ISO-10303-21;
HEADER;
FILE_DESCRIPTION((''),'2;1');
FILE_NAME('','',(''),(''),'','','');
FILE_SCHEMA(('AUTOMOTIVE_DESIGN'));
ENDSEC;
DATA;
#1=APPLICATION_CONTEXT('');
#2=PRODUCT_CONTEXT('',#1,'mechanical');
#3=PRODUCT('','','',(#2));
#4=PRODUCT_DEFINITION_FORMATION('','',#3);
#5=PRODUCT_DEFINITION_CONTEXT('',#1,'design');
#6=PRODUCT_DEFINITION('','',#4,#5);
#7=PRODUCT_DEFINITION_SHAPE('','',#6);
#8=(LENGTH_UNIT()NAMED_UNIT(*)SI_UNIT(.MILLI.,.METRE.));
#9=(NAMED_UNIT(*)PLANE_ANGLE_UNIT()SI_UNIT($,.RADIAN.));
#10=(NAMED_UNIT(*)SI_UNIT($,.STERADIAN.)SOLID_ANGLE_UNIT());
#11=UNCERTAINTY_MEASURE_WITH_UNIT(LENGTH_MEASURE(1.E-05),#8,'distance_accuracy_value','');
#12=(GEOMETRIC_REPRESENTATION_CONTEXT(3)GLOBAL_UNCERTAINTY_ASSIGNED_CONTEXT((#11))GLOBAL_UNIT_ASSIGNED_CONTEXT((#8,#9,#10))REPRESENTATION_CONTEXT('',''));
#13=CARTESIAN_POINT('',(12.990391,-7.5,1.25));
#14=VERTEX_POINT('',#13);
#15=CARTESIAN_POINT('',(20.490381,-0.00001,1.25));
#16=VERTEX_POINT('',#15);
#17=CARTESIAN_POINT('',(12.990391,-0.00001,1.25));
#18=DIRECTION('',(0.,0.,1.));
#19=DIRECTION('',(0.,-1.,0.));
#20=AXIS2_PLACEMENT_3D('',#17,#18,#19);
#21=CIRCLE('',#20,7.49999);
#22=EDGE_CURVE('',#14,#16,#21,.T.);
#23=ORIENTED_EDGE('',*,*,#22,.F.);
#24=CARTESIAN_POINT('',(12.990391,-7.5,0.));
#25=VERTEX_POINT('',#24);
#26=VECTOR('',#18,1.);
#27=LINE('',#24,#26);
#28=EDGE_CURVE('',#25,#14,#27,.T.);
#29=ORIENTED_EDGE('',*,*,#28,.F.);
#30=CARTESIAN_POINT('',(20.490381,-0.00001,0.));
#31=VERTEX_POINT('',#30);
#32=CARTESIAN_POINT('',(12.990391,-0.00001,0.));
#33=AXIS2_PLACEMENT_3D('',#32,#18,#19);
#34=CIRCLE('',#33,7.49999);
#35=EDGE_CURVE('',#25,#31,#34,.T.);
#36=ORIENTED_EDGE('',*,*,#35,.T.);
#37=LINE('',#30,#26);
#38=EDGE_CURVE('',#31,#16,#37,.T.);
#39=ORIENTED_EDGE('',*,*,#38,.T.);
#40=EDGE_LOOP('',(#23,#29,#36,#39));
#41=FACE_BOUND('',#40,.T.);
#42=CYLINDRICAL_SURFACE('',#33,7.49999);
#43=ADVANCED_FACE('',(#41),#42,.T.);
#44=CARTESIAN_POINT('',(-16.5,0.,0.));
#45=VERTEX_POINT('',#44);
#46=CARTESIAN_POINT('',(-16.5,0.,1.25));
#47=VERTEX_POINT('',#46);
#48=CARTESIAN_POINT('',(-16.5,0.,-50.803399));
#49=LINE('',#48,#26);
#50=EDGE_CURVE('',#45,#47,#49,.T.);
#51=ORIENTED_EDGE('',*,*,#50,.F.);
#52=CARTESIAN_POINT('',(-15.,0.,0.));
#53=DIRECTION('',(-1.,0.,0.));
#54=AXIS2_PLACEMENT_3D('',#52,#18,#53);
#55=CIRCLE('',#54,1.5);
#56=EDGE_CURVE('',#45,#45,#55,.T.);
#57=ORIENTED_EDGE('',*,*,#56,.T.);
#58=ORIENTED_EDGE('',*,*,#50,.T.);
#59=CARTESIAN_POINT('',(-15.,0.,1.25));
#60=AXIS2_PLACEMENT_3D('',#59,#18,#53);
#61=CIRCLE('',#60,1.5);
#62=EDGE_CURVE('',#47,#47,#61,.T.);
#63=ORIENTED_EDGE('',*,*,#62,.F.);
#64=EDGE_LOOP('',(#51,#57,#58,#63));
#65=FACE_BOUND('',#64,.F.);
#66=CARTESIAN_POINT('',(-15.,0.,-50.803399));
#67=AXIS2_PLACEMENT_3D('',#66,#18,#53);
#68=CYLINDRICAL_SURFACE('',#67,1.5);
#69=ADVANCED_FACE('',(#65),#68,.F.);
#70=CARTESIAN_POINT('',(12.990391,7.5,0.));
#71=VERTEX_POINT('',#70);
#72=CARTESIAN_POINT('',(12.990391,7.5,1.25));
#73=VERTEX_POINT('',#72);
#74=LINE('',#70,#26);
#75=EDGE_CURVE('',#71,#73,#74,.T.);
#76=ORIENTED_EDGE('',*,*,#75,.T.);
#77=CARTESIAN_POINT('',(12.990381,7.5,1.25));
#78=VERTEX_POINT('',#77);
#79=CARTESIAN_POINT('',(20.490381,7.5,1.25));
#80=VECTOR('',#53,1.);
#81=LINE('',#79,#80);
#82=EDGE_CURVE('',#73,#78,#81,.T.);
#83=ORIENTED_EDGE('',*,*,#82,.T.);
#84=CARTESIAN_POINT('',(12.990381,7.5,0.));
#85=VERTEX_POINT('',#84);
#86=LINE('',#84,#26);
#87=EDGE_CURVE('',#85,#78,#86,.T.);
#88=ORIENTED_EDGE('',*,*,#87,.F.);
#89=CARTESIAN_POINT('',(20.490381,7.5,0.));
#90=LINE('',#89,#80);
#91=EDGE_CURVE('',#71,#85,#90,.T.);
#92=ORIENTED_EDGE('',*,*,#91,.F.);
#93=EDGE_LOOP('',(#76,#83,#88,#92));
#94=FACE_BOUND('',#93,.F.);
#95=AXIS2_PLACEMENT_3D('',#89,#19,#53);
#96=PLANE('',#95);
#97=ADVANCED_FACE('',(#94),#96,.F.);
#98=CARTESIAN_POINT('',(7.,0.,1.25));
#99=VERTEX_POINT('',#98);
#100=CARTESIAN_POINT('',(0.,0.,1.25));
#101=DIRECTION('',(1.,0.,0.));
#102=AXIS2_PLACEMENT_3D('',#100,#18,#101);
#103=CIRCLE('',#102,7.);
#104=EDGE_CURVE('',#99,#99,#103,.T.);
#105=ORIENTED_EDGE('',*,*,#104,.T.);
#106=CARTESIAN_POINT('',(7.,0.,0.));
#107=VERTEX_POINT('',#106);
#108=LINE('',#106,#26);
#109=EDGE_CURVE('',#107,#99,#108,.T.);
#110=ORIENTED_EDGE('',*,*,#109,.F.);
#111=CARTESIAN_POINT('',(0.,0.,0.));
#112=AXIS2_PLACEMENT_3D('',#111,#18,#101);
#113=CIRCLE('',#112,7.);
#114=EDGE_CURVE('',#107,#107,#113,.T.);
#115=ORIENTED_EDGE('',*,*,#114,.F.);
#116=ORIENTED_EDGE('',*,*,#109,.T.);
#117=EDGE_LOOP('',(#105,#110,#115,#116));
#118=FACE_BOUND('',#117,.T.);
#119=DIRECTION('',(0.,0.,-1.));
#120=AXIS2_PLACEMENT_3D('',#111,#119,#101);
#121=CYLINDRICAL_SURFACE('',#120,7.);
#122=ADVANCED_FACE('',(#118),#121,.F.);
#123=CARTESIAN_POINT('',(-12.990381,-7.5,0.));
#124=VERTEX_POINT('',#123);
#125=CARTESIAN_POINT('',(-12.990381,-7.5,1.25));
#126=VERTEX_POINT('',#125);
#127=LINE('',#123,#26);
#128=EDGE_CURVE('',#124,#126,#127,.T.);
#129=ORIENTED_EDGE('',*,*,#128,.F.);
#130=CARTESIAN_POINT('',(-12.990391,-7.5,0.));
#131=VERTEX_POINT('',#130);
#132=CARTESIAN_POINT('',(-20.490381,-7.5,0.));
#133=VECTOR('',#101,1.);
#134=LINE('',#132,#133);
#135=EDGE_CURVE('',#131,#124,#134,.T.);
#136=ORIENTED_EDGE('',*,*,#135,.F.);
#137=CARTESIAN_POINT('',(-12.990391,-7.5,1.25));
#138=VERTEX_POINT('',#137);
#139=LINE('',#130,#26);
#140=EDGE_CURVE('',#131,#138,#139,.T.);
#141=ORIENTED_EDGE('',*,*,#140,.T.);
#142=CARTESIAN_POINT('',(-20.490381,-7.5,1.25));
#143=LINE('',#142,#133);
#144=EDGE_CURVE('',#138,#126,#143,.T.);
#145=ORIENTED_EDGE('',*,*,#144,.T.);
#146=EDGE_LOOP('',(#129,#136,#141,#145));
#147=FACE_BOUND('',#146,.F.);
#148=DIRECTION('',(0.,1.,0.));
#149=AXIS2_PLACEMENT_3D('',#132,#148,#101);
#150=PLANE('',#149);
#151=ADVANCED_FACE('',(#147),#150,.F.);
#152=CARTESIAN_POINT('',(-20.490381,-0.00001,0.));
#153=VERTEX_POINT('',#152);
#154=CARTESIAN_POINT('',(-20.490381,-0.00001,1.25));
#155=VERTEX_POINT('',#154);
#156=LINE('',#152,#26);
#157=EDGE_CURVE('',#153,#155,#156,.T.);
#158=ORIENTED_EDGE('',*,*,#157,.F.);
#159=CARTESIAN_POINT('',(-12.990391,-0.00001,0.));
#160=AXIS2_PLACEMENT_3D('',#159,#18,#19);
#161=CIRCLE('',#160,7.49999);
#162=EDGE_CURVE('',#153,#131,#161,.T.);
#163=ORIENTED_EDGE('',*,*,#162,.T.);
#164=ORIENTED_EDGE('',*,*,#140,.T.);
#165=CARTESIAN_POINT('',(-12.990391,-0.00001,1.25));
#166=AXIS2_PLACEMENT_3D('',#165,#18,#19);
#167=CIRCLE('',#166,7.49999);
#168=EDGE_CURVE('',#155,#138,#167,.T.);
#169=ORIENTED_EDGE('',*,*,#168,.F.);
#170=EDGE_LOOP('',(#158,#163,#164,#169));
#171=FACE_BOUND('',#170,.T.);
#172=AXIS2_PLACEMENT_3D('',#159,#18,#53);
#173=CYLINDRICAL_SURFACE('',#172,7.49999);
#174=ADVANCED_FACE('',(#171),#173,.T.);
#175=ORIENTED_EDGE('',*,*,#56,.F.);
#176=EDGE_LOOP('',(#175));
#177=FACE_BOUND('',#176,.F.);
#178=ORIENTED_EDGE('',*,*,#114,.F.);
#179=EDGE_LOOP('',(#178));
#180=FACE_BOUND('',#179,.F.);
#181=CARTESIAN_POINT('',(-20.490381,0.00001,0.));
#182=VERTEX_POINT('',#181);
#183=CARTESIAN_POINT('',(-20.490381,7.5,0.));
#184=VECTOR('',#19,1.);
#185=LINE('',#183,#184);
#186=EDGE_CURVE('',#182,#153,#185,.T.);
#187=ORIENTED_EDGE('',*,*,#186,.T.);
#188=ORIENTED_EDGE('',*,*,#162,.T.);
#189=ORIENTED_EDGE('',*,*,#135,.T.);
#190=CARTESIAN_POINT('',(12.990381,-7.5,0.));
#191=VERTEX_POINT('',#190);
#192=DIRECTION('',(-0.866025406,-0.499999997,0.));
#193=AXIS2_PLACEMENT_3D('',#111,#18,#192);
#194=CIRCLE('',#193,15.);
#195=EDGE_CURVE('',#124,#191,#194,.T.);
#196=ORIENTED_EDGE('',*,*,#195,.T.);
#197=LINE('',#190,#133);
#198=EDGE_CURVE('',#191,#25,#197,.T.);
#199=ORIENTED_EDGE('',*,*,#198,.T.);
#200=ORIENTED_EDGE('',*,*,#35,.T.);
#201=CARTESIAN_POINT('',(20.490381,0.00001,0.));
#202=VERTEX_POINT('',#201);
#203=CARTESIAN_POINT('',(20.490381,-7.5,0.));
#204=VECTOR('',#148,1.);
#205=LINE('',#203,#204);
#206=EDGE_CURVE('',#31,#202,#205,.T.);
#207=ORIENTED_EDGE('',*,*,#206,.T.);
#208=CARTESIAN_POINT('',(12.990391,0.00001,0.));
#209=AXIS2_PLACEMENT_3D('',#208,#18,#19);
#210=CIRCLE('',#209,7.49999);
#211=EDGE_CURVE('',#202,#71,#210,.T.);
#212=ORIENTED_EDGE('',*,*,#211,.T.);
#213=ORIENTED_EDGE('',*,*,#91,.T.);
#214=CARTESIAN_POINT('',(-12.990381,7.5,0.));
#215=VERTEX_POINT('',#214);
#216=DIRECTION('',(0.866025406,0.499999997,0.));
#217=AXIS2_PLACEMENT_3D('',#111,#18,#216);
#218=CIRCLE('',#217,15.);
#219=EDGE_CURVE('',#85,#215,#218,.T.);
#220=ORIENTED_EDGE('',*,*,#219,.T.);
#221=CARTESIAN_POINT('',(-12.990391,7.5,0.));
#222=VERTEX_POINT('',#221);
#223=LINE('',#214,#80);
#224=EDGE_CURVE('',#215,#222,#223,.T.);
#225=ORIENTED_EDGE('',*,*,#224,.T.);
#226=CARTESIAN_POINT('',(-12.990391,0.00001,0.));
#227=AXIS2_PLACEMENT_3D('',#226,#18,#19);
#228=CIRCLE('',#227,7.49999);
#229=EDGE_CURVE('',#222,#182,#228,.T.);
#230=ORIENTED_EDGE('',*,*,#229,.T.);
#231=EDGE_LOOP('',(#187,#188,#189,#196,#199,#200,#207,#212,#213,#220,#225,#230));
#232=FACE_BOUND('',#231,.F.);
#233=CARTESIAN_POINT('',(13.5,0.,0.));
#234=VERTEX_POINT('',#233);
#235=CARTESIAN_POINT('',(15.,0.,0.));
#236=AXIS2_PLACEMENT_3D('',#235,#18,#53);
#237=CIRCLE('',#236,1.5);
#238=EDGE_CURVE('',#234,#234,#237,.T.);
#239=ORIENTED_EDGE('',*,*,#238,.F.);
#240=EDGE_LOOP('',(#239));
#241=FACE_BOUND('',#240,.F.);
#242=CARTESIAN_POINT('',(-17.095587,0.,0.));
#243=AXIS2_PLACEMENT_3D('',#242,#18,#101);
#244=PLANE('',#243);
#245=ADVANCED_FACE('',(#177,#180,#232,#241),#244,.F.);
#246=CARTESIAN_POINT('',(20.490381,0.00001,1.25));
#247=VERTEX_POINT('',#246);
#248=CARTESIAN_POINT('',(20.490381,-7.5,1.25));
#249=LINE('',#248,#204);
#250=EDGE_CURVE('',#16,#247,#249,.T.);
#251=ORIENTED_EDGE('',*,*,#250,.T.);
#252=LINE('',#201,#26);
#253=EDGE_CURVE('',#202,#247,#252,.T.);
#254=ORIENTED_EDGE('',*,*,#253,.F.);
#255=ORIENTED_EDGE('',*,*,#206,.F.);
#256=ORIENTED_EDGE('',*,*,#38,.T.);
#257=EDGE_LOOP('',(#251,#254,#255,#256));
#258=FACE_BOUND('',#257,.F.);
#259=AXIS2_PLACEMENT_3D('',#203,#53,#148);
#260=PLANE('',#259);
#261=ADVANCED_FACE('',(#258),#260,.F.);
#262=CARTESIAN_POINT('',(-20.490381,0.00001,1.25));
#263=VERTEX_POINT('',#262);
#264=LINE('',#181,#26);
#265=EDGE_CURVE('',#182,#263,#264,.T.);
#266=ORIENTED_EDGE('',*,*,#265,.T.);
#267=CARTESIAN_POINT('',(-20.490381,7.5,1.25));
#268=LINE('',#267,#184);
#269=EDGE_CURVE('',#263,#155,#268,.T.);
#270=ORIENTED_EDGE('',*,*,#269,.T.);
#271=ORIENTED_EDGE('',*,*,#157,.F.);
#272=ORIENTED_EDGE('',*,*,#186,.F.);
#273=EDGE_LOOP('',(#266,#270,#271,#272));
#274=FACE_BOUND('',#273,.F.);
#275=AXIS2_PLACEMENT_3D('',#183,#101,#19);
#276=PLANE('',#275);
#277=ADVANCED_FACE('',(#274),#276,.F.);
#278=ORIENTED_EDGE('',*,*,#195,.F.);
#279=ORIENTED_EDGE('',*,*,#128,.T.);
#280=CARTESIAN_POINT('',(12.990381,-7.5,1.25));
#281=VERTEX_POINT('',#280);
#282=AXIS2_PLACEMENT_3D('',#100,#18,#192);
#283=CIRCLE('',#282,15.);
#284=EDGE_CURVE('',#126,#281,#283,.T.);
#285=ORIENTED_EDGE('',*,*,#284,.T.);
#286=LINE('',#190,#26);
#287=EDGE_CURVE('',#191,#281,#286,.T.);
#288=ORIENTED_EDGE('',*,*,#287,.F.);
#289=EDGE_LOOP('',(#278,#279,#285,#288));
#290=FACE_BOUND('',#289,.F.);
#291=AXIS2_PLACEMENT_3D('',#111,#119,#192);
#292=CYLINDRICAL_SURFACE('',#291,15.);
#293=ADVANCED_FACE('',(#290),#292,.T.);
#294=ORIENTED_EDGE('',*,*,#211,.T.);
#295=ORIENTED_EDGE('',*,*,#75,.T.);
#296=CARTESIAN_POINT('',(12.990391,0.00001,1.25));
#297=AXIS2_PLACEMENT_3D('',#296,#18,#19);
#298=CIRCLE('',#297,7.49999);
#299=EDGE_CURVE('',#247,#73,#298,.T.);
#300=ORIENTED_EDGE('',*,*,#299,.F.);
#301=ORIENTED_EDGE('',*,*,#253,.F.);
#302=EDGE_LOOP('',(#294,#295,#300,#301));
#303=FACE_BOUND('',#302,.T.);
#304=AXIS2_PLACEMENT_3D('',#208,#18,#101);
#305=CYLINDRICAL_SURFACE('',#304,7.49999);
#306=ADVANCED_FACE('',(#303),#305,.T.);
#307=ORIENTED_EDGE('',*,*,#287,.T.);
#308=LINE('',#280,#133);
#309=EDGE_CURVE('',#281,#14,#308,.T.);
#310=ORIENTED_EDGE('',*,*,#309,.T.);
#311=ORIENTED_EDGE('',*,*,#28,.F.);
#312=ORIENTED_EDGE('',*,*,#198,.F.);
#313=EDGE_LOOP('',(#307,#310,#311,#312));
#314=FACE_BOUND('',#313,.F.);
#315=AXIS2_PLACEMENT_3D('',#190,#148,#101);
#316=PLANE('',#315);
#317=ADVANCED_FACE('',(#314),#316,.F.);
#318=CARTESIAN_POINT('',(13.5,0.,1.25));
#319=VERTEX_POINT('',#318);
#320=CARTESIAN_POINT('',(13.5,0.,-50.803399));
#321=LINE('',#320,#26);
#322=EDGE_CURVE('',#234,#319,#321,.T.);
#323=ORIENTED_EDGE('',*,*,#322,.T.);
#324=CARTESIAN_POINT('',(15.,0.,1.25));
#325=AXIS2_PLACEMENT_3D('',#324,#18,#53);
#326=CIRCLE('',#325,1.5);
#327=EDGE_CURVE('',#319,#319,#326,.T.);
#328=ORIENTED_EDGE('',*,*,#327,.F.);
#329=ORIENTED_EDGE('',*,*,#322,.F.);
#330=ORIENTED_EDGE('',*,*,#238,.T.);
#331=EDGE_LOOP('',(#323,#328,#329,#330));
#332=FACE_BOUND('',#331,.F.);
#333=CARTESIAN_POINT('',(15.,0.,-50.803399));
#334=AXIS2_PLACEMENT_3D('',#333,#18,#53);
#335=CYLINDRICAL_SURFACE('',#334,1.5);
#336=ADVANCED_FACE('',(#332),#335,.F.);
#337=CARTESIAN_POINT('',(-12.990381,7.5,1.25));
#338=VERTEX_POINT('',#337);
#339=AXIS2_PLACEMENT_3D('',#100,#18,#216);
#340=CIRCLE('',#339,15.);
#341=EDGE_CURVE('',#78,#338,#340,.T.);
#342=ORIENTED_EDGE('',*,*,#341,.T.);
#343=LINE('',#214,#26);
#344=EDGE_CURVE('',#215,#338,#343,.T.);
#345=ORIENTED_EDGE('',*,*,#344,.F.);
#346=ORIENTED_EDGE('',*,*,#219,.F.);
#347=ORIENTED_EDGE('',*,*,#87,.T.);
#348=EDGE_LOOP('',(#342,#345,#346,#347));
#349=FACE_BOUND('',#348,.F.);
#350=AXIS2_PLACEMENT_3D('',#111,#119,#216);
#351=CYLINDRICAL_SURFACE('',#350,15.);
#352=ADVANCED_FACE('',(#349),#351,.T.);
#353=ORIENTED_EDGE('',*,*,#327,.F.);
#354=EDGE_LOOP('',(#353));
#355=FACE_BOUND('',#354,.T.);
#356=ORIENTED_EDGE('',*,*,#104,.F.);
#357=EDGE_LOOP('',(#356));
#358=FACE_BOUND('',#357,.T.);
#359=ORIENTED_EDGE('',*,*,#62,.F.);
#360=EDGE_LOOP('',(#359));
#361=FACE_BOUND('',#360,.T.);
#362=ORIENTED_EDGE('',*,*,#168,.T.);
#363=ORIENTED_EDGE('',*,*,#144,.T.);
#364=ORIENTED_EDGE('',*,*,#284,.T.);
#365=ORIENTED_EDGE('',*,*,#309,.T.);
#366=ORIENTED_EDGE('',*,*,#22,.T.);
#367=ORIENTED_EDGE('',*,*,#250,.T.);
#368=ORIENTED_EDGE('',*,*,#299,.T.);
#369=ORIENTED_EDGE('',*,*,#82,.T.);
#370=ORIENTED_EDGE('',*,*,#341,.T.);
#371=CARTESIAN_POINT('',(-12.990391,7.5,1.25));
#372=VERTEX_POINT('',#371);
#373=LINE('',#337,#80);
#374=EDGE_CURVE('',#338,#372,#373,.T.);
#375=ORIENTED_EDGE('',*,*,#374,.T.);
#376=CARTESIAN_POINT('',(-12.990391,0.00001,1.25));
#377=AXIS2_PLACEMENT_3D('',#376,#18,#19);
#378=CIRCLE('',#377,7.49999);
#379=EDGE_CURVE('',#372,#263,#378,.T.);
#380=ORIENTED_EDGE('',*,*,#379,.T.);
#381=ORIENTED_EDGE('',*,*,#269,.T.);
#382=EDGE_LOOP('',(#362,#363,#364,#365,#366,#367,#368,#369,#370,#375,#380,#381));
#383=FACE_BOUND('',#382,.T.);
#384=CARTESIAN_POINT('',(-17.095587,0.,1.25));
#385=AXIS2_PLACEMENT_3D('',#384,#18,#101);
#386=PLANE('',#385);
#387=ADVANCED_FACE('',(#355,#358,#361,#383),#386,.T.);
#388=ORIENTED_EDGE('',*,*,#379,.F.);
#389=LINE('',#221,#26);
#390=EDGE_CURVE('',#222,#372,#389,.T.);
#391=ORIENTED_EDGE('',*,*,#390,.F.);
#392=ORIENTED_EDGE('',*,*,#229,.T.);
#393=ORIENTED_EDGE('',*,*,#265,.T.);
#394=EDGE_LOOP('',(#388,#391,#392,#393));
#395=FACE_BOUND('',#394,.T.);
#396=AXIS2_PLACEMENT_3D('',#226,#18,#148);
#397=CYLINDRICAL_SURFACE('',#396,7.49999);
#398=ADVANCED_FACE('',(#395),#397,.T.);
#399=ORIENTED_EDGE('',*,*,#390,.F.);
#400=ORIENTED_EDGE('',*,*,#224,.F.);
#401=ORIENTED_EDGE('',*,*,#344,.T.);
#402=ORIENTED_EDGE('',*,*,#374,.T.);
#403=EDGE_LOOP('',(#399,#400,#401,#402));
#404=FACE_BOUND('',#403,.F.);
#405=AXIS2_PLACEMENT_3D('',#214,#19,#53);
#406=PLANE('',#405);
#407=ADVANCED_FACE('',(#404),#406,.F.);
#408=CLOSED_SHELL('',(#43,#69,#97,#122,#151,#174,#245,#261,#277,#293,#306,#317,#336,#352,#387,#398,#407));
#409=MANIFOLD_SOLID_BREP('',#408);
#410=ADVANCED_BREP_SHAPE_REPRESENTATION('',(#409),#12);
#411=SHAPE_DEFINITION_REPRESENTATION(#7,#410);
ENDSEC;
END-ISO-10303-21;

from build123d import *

# Parameters (mm, degrees)
F0_R     = 7
F1_DEPTH = 1.25
F2_R     = 7.49999
F3_D     = 3


# Not quite as in the source:
# - a fillet or chamfer is up to 0.001 mm smaller than in the source, because OpenCascade refuses the exact size


with BuildPart() as f1:
    # F0 (on Top) → F1 (new body)
    with BuildSketch(Plane.XY):
        with BuildLine():
            ThreePointArc((-12.990381, -7.5), (-15, 0), (-12.990381, 7.5))
            Line((-12.990381, 7.5), (-20.490381, 7.5))
            Line((-20.490381, 7.5), (-20.490381, -7.5))
            Line((-20.490381, -7.5), (-12.990381, -7.5))
        make_face()
        with BuildLine():
            ThreePointArc((12.990381, -7.5), (14.488887, -3.882286), (15, 0))
            ThreePointArc((15, 0), (14.488887, 3.882286), (12.990381, 7.5))
            ThreePointArc((12.990381, 7.5), (0, 15), (-12.990381, 7.5))
            ThreePointArc((-12.990381, 7.5), (-15, 0), (-12.990381, -7.5))
            ThreePointArc((-12.990381, -7.5), (0, -15), (12.990381, -7.5))
        make_face()
        Circle(F0_R, mode=Mode.SUBTRACT)
        with BuildLine():
            ThreePointArc((12.990381, 7.5), (14.488887, 3.882286), (15, 0))
            ThreePointArc((15, 0), (14.488887, -3.882286), (12.990381, -7.5))
            Line((12.990381, -7.5), (20.490381, -7.5))
            Line((20.490381, -7.5), (20.490381, 7.5))
            Line((20.490381, 7.5), (12.990381, 7.5))
        make_face()
    extrude(amount=F1_DEPTH)

    # F2 (radius 7.5 in the source; OpenCascade refuses exactly that, so slightly less here)
    f2_edges = [f1.edges().sort_by_distance(p)[0] for p in [
        (-20.490381, 7.5, 0.625),
        (-20.490381, -7.5, 0.625),
        (20.490381, 7.5, 0.625),
        (20.490381, -7.5, 0.625),
    ]]
    fillet(f2_edges, radius=F2_R)

    # F3 (through all)
    with Locations(Plane(origin=(0, 0, 0), x_dir=(1, 0, 0), z_dir=(0, 0, -1))):
        with Locations((15, 0), (-15, 0)):
            Hole(F3_D / 2)


solid = f1.part
